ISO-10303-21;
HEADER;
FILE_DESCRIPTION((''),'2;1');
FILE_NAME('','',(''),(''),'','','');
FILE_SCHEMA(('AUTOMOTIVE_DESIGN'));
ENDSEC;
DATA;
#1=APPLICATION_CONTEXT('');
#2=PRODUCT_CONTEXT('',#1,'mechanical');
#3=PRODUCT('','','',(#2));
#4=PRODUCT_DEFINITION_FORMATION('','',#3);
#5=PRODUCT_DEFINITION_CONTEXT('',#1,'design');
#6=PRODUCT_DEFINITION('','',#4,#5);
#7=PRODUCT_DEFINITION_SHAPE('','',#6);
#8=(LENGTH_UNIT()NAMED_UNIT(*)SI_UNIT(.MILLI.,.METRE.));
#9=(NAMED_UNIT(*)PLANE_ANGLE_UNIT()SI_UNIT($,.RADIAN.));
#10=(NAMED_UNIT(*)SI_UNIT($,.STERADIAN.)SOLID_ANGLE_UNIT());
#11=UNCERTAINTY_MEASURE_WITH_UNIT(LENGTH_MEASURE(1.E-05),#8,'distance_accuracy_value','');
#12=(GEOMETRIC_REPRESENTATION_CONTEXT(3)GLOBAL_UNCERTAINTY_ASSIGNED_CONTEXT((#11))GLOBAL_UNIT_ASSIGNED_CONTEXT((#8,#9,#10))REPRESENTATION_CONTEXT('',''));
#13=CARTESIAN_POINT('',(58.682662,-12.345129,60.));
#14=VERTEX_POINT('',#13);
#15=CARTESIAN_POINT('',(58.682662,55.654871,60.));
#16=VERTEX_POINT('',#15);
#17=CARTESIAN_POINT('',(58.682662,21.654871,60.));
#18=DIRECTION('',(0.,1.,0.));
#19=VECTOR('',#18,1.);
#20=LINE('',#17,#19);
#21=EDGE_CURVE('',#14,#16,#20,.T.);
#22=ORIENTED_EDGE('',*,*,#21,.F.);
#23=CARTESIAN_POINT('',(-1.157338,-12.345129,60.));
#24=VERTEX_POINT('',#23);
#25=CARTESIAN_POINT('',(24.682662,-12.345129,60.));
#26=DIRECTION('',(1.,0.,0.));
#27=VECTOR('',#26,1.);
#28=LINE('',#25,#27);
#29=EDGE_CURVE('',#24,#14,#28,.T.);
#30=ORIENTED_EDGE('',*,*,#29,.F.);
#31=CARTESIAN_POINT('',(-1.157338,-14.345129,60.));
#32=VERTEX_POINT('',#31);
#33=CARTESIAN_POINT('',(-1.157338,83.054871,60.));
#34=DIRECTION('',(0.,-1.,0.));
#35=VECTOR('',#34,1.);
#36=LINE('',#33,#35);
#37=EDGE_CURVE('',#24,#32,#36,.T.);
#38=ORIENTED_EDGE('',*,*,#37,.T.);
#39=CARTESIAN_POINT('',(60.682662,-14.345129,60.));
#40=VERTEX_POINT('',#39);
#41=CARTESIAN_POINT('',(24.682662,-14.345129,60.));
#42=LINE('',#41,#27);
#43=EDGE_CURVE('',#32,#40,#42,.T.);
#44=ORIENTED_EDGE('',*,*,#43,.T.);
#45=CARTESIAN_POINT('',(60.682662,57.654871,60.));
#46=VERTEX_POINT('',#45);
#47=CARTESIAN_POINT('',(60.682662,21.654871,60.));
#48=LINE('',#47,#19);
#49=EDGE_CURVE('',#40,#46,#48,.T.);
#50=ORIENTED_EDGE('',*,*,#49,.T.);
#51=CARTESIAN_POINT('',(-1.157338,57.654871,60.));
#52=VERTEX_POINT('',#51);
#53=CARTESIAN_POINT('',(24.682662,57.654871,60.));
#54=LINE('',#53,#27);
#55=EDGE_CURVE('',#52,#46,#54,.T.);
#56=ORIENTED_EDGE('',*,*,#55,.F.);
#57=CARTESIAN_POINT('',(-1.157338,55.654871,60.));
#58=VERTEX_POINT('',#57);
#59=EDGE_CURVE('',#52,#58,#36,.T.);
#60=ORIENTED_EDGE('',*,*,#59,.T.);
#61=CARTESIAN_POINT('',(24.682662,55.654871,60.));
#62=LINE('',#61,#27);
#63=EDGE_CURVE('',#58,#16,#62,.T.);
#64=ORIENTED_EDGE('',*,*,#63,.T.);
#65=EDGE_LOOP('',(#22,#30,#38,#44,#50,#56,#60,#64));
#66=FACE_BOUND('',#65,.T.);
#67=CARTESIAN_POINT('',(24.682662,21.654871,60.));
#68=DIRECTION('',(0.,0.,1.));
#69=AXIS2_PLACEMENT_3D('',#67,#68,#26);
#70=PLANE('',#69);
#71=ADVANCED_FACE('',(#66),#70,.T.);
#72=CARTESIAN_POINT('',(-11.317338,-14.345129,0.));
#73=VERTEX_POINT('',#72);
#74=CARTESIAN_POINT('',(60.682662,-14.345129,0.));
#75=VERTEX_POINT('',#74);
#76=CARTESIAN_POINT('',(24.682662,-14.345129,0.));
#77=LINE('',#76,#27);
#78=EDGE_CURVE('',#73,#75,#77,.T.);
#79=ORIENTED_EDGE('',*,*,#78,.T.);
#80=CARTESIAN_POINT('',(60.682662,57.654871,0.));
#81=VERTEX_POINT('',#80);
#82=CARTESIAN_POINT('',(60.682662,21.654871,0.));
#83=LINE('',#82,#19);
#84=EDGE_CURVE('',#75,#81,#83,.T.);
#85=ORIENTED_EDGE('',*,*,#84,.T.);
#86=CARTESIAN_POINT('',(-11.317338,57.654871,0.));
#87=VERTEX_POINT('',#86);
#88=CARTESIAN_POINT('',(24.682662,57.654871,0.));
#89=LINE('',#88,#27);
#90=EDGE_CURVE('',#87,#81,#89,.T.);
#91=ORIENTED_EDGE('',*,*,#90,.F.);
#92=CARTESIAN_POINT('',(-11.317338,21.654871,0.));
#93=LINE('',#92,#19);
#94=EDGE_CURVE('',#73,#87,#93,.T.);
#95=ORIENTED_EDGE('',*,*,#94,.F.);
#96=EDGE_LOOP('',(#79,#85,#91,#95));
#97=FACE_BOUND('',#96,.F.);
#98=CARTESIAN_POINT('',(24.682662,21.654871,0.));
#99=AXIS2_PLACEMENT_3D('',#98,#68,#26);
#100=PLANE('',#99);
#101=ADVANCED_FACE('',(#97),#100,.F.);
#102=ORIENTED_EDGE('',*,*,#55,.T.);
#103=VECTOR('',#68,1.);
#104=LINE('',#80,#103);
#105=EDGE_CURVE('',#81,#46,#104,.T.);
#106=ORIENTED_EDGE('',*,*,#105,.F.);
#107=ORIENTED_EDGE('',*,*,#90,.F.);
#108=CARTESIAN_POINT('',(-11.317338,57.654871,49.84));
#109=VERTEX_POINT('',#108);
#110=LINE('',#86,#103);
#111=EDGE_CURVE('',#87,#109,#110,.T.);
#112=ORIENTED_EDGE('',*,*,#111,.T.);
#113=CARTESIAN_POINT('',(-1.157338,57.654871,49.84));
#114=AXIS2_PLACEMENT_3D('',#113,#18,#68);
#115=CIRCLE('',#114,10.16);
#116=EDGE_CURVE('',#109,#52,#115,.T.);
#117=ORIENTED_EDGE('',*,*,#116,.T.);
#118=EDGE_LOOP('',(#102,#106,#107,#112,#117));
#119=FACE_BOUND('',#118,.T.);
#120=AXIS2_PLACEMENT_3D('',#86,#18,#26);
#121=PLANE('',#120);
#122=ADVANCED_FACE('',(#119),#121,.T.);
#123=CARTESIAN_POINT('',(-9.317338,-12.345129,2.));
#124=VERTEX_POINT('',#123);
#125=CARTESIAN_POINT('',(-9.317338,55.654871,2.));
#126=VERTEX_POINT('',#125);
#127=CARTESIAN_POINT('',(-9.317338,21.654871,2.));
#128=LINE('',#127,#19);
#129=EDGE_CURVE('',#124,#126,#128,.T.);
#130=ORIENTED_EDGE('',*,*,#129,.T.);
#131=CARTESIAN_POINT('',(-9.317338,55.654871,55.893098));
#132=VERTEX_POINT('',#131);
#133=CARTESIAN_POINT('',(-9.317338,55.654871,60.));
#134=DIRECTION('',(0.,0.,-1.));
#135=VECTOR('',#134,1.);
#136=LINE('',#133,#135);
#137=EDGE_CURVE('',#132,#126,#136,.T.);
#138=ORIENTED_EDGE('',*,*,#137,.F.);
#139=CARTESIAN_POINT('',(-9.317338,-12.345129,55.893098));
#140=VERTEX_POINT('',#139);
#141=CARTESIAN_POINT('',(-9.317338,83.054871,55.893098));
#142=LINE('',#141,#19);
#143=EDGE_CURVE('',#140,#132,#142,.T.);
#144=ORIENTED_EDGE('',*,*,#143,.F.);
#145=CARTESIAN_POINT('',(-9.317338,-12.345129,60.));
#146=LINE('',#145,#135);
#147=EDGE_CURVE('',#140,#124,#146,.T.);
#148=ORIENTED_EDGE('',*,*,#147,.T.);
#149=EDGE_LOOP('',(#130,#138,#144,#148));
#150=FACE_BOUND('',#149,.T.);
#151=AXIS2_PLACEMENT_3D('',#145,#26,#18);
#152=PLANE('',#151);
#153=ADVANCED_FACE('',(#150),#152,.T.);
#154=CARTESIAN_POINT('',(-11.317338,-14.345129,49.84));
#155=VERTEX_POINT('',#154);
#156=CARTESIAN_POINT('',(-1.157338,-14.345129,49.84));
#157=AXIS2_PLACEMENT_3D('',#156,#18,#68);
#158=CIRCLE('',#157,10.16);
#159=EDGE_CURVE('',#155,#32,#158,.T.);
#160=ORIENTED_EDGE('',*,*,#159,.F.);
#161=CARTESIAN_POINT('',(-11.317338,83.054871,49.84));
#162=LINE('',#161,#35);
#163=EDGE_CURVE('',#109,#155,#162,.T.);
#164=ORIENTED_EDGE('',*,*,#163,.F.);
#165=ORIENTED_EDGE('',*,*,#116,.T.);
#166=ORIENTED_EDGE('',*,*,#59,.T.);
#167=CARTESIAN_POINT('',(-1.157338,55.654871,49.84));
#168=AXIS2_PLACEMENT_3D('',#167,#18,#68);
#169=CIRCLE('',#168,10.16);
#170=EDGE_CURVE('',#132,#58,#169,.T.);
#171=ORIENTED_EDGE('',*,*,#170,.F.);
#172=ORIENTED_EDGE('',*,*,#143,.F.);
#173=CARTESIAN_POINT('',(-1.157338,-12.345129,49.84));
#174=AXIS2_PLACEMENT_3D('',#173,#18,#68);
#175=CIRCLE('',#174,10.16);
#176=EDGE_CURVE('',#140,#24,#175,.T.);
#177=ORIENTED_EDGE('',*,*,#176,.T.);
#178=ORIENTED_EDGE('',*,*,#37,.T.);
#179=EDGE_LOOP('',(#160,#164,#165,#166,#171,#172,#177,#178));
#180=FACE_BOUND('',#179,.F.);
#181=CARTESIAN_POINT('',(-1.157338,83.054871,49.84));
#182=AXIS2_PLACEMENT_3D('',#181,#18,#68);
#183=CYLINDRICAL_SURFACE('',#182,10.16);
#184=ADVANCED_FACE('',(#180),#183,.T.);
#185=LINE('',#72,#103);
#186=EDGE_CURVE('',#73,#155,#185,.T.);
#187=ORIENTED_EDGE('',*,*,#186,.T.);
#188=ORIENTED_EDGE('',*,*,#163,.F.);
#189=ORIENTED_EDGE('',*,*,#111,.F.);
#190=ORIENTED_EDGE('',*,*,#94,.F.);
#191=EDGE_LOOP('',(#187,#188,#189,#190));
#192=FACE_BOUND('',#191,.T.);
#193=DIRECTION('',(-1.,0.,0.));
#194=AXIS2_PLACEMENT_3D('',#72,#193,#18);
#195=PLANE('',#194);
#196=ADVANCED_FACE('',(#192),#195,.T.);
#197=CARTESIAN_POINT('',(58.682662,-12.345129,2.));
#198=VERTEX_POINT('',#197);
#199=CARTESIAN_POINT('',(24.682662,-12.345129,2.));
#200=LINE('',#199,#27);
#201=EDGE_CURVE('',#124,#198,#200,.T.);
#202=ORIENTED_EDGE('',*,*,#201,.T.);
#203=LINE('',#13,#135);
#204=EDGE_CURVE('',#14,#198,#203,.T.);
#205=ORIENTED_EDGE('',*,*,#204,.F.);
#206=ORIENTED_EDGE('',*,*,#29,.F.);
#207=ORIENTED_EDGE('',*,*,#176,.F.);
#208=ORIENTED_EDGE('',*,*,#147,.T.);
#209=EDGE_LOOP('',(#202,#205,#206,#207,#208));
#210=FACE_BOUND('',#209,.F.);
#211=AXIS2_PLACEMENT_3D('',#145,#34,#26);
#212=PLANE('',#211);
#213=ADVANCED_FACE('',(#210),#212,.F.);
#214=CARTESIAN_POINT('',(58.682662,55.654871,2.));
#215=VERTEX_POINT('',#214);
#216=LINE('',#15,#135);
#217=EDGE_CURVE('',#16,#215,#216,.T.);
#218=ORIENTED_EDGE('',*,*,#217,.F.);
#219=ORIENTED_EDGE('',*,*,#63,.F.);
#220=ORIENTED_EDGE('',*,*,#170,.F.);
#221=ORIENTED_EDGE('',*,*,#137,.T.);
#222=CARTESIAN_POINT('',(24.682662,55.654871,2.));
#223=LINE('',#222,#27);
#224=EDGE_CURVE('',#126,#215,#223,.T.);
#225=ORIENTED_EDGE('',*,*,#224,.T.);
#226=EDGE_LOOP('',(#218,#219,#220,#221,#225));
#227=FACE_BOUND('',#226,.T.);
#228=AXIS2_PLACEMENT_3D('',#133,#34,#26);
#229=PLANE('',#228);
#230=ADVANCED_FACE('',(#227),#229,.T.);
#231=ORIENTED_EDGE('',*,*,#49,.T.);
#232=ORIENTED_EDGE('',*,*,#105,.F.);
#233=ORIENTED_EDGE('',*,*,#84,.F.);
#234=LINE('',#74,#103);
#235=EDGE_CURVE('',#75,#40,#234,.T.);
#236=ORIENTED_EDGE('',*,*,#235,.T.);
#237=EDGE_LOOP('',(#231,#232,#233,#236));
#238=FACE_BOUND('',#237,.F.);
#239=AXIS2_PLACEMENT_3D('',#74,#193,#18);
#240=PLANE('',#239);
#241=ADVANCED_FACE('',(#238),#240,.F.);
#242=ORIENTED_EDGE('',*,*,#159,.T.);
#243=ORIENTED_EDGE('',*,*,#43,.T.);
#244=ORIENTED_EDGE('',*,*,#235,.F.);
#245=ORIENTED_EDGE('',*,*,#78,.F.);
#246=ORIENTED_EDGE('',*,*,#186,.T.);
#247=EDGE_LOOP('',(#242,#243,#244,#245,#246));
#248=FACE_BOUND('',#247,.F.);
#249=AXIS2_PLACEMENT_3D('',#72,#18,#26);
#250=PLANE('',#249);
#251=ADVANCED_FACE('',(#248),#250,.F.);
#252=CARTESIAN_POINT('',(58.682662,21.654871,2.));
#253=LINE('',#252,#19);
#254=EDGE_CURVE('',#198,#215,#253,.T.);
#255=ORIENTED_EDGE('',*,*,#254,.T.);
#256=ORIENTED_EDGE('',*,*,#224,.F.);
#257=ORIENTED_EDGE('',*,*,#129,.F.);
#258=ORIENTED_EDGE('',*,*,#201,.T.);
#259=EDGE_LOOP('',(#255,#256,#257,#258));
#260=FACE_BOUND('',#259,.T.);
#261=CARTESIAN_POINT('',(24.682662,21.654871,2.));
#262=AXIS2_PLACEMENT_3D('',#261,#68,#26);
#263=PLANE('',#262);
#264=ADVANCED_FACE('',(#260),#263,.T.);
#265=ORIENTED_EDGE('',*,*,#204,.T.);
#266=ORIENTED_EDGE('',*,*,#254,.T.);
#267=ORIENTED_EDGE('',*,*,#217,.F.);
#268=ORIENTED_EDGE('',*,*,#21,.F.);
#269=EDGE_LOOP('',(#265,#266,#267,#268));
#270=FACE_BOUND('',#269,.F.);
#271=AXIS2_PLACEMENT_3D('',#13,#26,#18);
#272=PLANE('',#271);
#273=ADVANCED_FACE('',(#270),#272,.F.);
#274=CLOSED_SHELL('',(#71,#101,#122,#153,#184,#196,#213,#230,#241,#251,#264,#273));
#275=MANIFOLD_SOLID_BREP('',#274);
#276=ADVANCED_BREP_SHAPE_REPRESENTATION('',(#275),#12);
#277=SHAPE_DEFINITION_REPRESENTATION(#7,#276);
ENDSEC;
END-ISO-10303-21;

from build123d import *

# Parameters (mm, degrees)
F0_W        = 72
F0_H        = 72
F1_DEPTH    = 60
F2_W        = 68
F2_H        = 68
F3_DEPTH    = 58
F4_T1_DEPTH = 122.8


# Not quite as in the source:
# - a fillet or chamfer that OpenCascade refuses, or shapes differently, is made with other operations: its cross-section is extruded or revolved along the edge and cut away or added


with BuildPart() as f1:
    # F0 (on Top) → F1 (new body)
    with BuildSketch(Plane.XY):
        with Locations((24.6826619834, 21.6548714693)):
            Rectangle(F0_W, F0_H)
    extrude(amount=F1_DEPTH)

    # F2 (on face) → F3 (cut)
    with BuildSketch(Plane.XY.offset(60)):
        with Locations((24.6826619834, 21.6548714693)):
            Rectangle(F2_W, F2_H)
    extrude(amount=-F3_DEPTH, mode=Mode.SUBTRACT)

    # F4: fillet of radius 10.16 on 1 edges, made by hand

    # F4_s2 → F4_t1 (cut)
    with BuildSketch(Plane.XZ.offset(-83.0548714693)):
        with BuildLine():
            ThreePointArc((-1.1573380166, 60), (-8.3415429135, 57.0242048969), (-11.3173380166, 49.84))
            Line((-11.3173380166, 49.84), (-11.3173380166, 60))
            Line((-11.3173380166, 60), (-1.1573380166, 60))
        make_face()
    extrude(amount=F4_T1_DEPTH, mode=Mode.SUBTRACT)


solid = f1.part
